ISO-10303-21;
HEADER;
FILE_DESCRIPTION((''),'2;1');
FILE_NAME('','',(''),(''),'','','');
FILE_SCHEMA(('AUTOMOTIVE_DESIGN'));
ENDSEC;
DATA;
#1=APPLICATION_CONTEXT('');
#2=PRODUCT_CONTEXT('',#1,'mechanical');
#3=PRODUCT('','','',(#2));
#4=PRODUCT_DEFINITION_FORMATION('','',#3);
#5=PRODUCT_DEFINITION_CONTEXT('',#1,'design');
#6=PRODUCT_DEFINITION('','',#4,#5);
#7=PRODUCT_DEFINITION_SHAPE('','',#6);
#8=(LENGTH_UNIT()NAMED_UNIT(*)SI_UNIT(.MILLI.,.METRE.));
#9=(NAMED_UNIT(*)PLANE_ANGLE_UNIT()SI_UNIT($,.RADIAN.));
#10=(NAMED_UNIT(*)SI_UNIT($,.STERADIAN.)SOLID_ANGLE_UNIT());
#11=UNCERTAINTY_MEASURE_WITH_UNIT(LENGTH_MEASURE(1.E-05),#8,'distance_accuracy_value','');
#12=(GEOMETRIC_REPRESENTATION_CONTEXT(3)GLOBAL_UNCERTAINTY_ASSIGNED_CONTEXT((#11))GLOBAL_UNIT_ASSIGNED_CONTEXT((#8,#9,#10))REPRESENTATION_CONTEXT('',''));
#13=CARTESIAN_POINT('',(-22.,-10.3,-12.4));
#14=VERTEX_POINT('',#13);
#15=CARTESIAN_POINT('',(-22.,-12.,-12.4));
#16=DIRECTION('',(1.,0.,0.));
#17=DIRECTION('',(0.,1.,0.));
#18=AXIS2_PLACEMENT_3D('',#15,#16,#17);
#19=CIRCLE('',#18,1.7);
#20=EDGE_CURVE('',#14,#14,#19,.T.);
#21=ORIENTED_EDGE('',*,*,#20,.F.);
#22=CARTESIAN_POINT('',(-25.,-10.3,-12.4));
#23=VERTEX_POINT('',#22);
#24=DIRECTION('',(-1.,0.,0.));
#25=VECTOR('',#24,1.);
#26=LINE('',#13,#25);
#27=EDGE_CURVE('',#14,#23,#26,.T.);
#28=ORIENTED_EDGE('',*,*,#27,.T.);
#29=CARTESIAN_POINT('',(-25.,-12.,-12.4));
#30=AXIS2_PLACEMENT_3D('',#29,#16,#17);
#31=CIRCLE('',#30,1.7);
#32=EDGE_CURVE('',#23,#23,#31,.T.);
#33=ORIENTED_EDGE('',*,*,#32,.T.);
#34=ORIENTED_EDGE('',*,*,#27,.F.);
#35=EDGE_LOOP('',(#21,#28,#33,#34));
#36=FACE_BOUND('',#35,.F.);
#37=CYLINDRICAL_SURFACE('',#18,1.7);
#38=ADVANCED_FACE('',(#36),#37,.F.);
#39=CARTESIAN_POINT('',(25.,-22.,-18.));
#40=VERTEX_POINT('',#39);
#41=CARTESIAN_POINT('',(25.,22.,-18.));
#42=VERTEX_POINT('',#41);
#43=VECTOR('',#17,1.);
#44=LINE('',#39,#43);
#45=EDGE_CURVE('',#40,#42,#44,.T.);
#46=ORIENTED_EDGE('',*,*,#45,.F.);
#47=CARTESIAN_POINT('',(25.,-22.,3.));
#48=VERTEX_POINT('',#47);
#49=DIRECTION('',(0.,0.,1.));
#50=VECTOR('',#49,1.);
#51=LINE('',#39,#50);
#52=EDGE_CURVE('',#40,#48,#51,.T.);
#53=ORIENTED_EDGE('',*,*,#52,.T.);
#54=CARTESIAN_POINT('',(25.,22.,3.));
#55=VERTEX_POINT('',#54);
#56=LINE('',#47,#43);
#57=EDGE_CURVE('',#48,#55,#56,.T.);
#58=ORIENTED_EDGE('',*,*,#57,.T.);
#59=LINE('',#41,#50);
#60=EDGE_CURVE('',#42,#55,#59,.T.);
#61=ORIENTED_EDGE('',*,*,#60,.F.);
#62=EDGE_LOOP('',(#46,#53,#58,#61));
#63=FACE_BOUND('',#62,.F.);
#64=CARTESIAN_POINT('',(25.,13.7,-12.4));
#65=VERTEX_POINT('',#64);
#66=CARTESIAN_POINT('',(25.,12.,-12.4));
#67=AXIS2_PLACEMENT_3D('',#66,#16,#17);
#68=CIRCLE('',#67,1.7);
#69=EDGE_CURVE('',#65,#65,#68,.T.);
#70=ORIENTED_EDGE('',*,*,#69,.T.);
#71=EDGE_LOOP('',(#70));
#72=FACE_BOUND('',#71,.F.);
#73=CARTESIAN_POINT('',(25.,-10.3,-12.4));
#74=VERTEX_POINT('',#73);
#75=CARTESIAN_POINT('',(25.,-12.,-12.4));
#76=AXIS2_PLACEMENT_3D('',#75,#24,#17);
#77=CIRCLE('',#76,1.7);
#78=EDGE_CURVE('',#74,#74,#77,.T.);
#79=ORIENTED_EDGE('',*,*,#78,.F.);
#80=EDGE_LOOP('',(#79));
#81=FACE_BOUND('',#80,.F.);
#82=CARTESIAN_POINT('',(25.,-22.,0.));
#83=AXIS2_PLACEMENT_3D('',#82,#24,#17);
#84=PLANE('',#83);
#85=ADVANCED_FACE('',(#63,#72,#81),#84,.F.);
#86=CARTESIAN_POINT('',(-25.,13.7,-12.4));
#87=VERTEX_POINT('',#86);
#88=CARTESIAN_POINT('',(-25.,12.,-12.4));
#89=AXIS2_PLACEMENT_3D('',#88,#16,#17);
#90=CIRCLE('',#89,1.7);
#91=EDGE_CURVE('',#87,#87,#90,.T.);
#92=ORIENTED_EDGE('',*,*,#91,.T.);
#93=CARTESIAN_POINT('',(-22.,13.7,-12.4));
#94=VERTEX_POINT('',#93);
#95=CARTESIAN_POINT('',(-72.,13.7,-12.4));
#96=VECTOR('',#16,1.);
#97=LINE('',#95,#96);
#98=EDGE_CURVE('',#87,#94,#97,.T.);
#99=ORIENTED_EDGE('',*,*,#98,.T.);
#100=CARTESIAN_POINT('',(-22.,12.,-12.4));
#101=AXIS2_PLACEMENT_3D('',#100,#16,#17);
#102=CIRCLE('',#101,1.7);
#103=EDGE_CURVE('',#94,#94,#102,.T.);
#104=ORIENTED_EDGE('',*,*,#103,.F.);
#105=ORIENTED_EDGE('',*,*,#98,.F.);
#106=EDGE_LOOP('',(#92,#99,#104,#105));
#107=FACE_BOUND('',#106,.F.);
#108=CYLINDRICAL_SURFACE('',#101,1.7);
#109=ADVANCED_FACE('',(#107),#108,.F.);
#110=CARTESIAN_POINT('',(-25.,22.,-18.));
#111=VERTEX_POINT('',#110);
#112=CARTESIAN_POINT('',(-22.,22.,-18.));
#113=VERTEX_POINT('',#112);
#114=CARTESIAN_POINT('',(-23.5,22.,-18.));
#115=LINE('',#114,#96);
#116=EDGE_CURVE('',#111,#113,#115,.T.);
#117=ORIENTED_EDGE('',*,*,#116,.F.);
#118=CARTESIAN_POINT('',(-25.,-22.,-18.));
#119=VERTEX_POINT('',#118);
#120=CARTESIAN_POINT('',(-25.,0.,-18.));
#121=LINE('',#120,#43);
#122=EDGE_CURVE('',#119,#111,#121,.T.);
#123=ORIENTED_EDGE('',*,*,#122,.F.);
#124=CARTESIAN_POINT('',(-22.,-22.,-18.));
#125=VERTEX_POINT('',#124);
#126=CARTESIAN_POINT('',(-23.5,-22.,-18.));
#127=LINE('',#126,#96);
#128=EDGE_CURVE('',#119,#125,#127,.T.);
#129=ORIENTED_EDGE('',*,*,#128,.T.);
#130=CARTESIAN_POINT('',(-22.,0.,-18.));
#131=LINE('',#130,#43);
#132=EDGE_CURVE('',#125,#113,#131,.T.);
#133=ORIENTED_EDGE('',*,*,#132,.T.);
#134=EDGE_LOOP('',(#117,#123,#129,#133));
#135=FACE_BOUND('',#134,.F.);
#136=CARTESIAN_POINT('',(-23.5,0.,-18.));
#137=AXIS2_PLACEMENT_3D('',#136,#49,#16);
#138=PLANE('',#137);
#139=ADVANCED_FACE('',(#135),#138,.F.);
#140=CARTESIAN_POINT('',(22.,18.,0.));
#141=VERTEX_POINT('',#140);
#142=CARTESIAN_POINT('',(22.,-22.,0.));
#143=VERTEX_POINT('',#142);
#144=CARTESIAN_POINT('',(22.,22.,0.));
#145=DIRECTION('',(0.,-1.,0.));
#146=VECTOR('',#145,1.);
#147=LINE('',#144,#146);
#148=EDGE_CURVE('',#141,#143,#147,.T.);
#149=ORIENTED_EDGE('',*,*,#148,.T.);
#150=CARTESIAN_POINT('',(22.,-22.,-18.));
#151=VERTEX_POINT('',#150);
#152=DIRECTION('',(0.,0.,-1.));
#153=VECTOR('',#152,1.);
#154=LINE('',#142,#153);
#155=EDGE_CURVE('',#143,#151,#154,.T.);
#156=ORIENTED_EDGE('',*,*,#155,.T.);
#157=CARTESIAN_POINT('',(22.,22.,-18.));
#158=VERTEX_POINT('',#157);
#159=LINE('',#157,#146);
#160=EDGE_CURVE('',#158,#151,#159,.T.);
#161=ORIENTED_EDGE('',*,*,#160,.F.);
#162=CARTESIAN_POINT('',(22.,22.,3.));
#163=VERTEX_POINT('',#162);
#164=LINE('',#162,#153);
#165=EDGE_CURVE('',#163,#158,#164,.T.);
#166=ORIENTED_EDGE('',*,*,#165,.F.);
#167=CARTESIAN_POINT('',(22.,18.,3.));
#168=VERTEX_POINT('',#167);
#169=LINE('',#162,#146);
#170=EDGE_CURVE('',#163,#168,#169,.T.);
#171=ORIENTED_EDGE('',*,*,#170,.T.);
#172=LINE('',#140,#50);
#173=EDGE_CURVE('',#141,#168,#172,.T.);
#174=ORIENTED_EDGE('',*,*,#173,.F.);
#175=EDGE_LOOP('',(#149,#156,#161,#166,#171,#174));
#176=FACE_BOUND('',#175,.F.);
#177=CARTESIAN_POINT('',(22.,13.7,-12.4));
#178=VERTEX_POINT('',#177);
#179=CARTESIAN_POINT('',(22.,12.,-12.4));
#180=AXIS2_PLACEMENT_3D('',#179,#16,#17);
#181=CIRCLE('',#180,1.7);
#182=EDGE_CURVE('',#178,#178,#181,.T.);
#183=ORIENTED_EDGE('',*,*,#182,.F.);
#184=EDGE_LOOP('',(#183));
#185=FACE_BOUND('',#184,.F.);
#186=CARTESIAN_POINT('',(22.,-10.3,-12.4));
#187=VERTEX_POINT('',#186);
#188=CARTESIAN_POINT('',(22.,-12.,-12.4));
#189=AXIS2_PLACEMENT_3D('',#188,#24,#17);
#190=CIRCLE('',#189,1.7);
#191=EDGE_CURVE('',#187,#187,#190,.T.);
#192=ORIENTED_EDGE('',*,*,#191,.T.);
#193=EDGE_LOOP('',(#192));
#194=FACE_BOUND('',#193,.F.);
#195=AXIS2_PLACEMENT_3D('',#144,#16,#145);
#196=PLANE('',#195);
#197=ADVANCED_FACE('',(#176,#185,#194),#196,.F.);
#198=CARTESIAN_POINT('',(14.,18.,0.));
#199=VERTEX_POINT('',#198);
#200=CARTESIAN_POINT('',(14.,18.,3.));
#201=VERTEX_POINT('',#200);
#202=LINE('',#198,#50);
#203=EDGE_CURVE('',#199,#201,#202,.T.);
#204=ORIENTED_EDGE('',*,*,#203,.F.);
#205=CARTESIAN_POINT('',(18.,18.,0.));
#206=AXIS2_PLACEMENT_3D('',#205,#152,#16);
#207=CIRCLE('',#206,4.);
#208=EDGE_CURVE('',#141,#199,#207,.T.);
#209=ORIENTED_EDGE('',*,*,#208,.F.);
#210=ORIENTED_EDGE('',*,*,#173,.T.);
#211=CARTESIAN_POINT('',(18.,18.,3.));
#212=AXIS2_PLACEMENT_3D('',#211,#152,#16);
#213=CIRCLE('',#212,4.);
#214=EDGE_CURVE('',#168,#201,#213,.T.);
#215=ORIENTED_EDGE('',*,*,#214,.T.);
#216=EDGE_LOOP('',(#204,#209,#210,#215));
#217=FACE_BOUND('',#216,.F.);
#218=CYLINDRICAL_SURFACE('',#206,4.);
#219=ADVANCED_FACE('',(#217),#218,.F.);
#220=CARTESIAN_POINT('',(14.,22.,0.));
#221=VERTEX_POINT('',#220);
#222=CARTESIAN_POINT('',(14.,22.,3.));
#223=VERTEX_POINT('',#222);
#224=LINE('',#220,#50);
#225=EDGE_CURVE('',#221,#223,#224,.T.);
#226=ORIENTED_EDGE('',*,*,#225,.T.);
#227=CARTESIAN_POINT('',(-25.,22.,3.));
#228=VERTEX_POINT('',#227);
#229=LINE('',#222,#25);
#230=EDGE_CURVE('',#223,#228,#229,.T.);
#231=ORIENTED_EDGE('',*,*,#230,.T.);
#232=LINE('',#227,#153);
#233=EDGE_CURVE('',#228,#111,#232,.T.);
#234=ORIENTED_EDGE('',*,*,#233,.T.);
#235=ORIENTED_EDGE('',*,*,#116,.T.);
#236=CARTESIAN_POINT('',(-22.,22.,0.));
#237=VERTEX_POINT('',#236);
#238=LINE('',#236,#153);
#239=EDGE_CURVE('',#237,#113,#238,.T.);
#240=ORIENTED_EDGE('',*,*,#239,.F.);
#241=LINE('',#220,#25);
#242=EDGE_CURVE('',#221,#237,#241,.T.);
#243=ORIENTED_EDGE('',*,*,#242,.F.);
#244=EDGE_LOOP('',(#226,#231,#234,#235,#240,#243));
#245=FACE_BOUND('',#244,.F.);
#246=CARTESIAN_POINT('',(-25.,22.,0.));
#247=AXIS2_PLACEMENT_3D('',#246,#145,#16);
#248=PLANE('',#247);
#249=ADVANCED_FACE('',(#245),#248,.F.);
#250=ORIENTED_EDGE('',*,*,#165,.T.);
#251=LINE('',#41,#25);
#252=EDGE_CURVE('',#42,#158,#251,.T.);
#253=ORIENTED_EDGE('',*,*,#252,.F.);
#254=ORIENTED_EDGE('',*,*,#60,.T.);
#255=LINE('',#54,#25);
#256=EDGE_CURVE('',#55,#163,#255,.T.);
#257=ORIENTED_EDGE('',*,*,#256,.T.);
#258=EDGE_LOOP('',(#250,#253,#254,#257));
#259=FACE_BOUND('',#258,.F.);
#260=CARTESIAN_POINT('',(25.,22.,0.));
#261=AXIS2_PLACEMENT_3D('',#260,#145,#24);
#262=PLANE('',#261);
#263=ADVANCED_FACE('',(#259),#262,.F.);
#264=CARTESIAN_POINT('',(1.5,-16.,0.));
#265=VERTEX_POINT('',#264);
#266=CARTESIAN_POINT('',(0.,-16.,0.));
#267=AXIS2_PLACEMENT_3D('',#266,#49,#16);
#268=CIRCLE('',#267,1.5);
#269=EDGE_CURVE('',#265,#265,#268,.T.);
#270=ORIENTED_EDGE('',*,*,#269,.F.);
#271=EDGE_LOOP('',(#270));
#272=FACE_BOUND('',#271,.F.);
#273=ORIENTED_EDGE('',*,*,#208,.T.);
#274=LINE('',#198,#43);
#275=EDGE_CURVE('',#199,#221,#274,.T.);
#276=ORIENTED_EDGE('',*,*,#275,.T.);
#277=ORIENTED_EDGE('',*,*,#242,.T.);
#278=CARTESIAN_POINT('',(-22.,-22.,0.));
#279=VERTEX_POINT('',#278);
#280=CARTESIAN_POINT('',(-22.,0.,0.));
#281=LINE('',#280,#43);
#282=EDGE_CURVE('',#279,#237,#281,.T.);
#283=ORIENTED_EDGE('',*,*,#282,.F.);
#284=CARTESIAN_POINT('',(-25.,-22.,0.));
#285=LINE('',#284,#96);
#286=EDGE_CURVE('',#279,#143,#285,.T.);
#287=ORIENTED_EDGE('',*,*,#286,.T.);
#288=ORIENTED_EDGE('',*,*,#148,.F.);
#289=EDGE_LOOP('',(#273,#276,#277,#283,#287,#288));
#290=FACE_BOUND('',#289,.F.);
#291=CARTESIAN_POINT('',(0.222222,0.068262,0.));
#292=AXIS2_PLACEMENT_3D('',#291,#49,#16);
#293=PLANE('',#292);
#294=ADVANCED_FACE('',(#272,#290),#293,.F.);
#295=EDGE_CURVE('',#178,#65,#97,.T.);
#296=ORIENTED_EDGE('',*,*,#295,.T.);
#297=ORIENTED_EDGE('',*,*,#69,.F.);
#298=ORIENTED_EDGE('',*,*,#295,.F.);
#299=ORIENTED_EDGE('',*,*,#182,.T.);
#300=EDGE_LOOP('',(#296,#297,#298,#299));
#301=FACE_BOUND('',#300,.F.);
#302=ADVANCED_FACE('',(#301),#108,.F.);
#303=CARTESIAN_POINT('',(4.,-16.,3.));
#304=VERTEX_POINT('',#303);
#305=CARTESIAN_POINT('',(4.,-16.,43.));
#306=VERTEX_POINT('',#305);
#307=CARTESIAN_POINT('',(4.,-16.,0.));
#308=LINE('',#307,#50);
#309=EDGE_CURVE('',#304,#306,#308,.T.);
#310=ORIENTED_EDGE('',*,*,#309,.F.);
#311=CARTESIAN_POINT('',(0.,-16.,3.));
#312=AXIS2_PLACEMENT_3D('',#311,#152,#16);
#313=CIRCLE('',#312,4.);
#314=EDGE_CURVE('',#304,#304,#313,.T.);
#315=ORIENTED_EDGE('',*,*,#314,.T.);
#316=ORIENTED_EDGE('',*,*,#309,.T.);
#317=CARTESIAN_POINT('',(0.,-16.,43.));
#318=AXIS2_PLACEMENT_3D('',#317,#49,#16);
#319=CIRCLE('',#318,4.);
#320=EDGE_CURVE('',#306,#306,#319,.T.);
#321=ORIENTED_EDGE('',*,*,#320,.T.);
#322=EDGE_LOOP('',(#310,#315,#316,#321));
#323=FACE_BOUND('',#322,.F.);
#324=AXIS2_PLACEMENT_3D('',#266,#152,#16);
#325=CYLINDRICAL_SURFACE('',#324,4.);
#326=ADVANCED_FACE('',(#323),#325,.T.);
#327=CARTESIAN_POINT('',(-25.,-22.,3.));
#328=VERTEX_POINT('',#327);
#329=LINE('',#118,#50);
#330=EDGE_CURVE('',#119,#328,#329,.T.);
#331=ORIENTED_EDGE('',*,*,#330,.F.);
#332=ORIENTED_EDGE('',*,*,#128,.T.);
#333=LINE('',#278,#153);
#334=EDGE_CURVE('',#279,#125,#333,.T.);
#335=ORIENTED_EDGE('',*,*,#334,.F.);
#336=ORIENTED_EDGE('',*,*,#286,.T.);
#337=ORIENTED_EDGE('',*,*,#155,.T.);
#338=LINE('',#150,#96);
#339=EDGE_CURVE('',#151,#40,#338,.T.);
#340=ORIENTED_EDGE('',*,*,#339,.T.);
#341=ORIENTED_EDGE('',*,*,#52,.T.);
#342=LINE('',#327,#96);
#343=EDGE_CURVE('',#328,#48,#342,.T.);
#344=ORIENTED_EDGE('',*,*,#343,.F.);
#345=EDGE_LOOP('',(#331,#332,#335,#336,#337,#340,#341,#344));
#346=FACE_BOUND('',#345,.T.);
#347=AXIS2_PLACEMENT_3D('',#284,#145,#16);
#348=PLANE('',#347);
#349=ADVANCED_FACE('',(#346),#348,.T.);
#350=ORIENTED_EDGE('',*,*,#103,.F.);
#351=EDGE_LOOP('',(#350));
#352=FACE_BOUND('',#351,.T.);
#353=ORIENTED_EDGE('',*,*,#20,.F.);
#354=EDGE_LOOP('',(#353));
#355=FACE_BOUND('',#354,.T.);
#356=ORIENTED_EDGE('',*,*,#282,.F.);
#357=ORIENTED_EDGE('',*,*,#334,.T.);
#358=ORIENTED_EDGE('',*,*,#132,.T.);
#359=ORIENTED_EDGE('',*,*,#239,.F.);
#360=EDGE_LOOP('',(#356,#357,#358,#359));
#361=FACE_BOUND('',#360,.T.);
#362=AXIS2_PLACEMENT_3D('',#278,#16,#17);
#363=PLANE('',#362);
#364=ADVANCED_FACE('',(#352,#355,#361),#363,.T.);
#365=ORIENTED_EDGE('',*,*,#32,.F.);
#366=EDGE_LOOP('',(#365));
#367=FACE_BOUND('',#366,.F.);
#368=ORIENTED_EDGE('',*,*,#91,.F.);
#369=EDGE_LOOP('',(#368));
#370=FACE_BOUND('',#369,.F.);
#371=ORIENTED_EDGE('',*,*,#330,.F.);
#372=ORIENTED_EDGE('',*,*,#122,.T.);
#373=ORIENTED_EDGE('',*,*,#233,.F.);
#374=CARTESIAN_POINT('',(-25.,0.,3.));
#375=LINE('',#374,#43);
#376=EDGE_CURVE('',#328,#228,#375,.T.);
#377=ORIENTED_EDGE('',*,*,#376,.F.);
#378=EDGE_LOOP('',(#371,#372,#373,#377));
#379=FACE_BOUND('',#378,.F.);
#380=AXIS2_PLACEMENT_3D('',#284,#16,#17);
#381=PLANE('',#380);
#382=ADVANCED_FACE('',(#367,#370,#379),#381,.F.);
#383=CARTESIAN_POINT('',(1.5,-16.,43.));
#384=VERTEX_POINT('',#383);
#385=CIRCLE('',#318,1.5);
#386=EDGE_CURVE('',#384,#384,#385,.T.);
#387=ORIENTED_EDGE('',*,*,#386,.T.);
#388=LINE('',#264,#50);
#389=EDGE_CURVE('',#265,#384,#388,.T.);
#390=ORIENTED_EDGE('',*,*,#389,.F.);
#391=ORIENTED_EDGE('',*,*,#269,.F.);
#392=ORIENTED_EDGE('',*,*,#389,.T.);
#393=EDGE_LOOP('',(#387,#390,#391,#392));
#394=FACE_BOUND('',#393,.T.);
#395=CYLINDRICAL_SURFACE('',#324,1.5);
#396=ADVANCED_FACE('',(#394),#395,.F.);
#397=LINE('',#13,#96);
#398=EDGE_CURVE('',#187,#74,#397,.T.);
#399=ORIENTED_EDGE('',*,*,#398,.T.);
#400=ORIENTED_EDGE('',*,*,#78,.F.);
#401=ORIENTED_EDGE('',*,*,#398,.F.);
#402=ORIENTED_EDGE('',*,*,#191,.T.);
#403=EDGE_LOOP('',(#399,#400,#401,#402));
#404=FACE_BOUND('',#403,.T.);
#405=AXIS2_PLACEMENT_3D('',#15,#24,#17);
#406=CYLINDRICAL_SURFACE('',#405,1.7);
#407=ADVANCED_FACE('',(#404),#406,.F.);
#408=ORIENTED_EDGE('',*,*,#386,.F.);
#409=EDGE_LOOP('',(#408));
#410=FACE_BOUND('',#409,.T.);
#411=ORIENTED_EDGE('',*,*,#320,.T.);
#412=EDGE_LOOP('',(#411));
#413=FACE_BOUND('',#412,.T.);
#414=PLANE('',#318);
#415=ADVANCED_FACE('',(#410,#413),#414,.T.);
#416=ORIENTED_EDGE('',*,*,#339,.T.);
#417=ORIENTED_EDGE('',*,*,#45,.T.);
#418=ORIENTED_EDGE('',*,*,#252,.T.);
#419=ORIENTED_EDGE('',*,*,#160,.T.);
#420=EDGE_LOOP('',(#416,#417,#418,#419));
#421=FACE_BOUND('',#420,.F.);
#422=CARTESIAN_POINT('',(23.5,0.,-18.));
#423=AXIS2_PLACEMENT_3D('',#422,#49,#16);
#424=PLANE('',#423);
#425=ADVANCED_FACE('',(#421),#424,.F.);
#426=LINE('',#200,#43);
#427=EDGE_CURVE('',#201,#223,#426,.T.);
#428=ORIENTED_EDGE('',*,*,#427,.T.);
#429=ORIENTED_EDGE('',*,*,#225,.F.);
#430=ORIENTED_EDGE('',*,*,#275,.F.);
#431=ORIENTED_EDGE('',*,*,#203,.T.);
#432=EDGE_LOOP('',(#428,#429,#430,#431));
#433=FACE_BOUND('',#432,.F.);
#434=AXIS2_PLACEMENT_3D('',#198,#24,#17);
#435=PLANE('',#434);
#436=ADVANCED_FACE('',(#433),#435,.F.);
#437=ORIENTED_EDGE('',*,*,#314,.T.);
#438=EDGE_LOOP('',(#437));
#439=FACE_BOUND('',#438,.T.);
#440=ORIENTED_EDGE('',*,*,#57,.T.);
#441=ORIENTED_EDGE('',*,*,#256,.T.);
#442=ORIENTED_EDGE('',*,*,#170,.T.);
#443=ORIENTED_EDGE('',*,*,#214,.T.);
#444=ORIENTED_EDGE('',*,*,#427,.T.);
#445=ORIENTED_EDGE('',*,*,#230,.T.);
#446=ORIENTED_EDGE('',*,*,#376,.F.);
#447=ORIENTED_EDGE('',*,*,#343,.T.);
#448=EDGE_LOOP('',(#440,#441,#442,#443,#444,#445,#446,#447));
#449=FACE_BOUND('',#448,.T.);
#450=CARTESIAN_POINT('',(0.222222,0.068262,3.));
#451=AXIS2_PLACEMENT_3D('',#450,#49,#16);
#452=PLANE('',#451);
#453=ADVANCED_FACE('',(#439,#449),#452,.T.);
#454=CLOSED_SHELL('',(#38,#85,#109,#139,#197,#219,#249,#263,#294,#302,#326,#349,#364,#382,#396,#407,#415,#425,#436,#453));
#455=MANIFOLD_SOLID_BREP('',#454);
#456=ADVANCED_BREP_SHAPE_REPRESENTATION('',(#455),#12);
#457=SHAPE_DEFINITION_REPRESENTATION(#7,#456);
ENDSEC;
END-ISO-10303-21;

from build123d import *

# Parameters (mm, degrees)
F0_R     = 4
F0_W     = 3
F0_H     = 44
F0_R_2   = 1.5
F1_DEPTH = 3
F2_DEPTH = 18
F3_R     = 1.7
F4_DEPTH = 50
F5_DEPTH = 43


# Not quite as in the source:
# - a feature names something its author has since deleted; it is built from what else it names


with BuildPart() as f1:
    # F0 (on Top) → F1 (new body)
    with BuildSketch(Plane.XY):
        with BuildLine():
            Line((14, 22), (-22, 22))
            Line((-22, 22), (-22, -22))
            Line((-22, -22), (22, -22))
            Line((22, -22), (22, 18))
            ThreePointArc((22, 18), (18, 14), (14, 18))
            Line((14, 18), (14, 18.3849148452))
            Line((14, 18.3849148452), (14, 22))
        make_face()
        with Locations((0, -16)):
            Circle(F0_R, mode=Mode.SUBTRACT)
        with Locations((-23.5, 0)):
            Rectangle(F0_W, F0_H)
        Polygon((22, 18), (22, -22), (25, -22), (25, 22), (22, 22), align=None)
        with Locations((0, -16)):
            Circle(F0_R)
        with Locations((0, -16)):
            Circle(F0_R_2, mode=Mode.SUBTRACT)
    extrude(amount=F1_DEPTH)

    # F0 (on Top) → F2 (join)
    with BuildSketch(Plane.XY):
        with Locations((-23.5, 0)):
            Rectangle(F0_W, F0_H)
        Polygon((22, 18), (22, -22), (25, -22), (25, 22), (22, 22), align=None)
    extrude(amount=-F2_DEPTH)

    # F3 (on face) → F4 (cut, symmetric)
    with BuildSketch(Plane.YZ.offset(-22)):
        with Locations((-12, -12.4)):
            Circle(F3_R)
        with Locations((12, -12.4)):
            Circle(F3_R)
    extrude(amount=F4_DEPTH, both=True, mode=Mode.SUBTRACT)

    # F0 (on Top) → F5 (join)
    with BuildSketch(Plane.XY):
        with Locations((0, -16)):
            Circle(F0_R)
        with Locations((0, -16)):
            Circle(F0_R_2, mode=Mode.SUBTRACT)
    extrude(amount=F5_DEPTH)


solid = f1.part
